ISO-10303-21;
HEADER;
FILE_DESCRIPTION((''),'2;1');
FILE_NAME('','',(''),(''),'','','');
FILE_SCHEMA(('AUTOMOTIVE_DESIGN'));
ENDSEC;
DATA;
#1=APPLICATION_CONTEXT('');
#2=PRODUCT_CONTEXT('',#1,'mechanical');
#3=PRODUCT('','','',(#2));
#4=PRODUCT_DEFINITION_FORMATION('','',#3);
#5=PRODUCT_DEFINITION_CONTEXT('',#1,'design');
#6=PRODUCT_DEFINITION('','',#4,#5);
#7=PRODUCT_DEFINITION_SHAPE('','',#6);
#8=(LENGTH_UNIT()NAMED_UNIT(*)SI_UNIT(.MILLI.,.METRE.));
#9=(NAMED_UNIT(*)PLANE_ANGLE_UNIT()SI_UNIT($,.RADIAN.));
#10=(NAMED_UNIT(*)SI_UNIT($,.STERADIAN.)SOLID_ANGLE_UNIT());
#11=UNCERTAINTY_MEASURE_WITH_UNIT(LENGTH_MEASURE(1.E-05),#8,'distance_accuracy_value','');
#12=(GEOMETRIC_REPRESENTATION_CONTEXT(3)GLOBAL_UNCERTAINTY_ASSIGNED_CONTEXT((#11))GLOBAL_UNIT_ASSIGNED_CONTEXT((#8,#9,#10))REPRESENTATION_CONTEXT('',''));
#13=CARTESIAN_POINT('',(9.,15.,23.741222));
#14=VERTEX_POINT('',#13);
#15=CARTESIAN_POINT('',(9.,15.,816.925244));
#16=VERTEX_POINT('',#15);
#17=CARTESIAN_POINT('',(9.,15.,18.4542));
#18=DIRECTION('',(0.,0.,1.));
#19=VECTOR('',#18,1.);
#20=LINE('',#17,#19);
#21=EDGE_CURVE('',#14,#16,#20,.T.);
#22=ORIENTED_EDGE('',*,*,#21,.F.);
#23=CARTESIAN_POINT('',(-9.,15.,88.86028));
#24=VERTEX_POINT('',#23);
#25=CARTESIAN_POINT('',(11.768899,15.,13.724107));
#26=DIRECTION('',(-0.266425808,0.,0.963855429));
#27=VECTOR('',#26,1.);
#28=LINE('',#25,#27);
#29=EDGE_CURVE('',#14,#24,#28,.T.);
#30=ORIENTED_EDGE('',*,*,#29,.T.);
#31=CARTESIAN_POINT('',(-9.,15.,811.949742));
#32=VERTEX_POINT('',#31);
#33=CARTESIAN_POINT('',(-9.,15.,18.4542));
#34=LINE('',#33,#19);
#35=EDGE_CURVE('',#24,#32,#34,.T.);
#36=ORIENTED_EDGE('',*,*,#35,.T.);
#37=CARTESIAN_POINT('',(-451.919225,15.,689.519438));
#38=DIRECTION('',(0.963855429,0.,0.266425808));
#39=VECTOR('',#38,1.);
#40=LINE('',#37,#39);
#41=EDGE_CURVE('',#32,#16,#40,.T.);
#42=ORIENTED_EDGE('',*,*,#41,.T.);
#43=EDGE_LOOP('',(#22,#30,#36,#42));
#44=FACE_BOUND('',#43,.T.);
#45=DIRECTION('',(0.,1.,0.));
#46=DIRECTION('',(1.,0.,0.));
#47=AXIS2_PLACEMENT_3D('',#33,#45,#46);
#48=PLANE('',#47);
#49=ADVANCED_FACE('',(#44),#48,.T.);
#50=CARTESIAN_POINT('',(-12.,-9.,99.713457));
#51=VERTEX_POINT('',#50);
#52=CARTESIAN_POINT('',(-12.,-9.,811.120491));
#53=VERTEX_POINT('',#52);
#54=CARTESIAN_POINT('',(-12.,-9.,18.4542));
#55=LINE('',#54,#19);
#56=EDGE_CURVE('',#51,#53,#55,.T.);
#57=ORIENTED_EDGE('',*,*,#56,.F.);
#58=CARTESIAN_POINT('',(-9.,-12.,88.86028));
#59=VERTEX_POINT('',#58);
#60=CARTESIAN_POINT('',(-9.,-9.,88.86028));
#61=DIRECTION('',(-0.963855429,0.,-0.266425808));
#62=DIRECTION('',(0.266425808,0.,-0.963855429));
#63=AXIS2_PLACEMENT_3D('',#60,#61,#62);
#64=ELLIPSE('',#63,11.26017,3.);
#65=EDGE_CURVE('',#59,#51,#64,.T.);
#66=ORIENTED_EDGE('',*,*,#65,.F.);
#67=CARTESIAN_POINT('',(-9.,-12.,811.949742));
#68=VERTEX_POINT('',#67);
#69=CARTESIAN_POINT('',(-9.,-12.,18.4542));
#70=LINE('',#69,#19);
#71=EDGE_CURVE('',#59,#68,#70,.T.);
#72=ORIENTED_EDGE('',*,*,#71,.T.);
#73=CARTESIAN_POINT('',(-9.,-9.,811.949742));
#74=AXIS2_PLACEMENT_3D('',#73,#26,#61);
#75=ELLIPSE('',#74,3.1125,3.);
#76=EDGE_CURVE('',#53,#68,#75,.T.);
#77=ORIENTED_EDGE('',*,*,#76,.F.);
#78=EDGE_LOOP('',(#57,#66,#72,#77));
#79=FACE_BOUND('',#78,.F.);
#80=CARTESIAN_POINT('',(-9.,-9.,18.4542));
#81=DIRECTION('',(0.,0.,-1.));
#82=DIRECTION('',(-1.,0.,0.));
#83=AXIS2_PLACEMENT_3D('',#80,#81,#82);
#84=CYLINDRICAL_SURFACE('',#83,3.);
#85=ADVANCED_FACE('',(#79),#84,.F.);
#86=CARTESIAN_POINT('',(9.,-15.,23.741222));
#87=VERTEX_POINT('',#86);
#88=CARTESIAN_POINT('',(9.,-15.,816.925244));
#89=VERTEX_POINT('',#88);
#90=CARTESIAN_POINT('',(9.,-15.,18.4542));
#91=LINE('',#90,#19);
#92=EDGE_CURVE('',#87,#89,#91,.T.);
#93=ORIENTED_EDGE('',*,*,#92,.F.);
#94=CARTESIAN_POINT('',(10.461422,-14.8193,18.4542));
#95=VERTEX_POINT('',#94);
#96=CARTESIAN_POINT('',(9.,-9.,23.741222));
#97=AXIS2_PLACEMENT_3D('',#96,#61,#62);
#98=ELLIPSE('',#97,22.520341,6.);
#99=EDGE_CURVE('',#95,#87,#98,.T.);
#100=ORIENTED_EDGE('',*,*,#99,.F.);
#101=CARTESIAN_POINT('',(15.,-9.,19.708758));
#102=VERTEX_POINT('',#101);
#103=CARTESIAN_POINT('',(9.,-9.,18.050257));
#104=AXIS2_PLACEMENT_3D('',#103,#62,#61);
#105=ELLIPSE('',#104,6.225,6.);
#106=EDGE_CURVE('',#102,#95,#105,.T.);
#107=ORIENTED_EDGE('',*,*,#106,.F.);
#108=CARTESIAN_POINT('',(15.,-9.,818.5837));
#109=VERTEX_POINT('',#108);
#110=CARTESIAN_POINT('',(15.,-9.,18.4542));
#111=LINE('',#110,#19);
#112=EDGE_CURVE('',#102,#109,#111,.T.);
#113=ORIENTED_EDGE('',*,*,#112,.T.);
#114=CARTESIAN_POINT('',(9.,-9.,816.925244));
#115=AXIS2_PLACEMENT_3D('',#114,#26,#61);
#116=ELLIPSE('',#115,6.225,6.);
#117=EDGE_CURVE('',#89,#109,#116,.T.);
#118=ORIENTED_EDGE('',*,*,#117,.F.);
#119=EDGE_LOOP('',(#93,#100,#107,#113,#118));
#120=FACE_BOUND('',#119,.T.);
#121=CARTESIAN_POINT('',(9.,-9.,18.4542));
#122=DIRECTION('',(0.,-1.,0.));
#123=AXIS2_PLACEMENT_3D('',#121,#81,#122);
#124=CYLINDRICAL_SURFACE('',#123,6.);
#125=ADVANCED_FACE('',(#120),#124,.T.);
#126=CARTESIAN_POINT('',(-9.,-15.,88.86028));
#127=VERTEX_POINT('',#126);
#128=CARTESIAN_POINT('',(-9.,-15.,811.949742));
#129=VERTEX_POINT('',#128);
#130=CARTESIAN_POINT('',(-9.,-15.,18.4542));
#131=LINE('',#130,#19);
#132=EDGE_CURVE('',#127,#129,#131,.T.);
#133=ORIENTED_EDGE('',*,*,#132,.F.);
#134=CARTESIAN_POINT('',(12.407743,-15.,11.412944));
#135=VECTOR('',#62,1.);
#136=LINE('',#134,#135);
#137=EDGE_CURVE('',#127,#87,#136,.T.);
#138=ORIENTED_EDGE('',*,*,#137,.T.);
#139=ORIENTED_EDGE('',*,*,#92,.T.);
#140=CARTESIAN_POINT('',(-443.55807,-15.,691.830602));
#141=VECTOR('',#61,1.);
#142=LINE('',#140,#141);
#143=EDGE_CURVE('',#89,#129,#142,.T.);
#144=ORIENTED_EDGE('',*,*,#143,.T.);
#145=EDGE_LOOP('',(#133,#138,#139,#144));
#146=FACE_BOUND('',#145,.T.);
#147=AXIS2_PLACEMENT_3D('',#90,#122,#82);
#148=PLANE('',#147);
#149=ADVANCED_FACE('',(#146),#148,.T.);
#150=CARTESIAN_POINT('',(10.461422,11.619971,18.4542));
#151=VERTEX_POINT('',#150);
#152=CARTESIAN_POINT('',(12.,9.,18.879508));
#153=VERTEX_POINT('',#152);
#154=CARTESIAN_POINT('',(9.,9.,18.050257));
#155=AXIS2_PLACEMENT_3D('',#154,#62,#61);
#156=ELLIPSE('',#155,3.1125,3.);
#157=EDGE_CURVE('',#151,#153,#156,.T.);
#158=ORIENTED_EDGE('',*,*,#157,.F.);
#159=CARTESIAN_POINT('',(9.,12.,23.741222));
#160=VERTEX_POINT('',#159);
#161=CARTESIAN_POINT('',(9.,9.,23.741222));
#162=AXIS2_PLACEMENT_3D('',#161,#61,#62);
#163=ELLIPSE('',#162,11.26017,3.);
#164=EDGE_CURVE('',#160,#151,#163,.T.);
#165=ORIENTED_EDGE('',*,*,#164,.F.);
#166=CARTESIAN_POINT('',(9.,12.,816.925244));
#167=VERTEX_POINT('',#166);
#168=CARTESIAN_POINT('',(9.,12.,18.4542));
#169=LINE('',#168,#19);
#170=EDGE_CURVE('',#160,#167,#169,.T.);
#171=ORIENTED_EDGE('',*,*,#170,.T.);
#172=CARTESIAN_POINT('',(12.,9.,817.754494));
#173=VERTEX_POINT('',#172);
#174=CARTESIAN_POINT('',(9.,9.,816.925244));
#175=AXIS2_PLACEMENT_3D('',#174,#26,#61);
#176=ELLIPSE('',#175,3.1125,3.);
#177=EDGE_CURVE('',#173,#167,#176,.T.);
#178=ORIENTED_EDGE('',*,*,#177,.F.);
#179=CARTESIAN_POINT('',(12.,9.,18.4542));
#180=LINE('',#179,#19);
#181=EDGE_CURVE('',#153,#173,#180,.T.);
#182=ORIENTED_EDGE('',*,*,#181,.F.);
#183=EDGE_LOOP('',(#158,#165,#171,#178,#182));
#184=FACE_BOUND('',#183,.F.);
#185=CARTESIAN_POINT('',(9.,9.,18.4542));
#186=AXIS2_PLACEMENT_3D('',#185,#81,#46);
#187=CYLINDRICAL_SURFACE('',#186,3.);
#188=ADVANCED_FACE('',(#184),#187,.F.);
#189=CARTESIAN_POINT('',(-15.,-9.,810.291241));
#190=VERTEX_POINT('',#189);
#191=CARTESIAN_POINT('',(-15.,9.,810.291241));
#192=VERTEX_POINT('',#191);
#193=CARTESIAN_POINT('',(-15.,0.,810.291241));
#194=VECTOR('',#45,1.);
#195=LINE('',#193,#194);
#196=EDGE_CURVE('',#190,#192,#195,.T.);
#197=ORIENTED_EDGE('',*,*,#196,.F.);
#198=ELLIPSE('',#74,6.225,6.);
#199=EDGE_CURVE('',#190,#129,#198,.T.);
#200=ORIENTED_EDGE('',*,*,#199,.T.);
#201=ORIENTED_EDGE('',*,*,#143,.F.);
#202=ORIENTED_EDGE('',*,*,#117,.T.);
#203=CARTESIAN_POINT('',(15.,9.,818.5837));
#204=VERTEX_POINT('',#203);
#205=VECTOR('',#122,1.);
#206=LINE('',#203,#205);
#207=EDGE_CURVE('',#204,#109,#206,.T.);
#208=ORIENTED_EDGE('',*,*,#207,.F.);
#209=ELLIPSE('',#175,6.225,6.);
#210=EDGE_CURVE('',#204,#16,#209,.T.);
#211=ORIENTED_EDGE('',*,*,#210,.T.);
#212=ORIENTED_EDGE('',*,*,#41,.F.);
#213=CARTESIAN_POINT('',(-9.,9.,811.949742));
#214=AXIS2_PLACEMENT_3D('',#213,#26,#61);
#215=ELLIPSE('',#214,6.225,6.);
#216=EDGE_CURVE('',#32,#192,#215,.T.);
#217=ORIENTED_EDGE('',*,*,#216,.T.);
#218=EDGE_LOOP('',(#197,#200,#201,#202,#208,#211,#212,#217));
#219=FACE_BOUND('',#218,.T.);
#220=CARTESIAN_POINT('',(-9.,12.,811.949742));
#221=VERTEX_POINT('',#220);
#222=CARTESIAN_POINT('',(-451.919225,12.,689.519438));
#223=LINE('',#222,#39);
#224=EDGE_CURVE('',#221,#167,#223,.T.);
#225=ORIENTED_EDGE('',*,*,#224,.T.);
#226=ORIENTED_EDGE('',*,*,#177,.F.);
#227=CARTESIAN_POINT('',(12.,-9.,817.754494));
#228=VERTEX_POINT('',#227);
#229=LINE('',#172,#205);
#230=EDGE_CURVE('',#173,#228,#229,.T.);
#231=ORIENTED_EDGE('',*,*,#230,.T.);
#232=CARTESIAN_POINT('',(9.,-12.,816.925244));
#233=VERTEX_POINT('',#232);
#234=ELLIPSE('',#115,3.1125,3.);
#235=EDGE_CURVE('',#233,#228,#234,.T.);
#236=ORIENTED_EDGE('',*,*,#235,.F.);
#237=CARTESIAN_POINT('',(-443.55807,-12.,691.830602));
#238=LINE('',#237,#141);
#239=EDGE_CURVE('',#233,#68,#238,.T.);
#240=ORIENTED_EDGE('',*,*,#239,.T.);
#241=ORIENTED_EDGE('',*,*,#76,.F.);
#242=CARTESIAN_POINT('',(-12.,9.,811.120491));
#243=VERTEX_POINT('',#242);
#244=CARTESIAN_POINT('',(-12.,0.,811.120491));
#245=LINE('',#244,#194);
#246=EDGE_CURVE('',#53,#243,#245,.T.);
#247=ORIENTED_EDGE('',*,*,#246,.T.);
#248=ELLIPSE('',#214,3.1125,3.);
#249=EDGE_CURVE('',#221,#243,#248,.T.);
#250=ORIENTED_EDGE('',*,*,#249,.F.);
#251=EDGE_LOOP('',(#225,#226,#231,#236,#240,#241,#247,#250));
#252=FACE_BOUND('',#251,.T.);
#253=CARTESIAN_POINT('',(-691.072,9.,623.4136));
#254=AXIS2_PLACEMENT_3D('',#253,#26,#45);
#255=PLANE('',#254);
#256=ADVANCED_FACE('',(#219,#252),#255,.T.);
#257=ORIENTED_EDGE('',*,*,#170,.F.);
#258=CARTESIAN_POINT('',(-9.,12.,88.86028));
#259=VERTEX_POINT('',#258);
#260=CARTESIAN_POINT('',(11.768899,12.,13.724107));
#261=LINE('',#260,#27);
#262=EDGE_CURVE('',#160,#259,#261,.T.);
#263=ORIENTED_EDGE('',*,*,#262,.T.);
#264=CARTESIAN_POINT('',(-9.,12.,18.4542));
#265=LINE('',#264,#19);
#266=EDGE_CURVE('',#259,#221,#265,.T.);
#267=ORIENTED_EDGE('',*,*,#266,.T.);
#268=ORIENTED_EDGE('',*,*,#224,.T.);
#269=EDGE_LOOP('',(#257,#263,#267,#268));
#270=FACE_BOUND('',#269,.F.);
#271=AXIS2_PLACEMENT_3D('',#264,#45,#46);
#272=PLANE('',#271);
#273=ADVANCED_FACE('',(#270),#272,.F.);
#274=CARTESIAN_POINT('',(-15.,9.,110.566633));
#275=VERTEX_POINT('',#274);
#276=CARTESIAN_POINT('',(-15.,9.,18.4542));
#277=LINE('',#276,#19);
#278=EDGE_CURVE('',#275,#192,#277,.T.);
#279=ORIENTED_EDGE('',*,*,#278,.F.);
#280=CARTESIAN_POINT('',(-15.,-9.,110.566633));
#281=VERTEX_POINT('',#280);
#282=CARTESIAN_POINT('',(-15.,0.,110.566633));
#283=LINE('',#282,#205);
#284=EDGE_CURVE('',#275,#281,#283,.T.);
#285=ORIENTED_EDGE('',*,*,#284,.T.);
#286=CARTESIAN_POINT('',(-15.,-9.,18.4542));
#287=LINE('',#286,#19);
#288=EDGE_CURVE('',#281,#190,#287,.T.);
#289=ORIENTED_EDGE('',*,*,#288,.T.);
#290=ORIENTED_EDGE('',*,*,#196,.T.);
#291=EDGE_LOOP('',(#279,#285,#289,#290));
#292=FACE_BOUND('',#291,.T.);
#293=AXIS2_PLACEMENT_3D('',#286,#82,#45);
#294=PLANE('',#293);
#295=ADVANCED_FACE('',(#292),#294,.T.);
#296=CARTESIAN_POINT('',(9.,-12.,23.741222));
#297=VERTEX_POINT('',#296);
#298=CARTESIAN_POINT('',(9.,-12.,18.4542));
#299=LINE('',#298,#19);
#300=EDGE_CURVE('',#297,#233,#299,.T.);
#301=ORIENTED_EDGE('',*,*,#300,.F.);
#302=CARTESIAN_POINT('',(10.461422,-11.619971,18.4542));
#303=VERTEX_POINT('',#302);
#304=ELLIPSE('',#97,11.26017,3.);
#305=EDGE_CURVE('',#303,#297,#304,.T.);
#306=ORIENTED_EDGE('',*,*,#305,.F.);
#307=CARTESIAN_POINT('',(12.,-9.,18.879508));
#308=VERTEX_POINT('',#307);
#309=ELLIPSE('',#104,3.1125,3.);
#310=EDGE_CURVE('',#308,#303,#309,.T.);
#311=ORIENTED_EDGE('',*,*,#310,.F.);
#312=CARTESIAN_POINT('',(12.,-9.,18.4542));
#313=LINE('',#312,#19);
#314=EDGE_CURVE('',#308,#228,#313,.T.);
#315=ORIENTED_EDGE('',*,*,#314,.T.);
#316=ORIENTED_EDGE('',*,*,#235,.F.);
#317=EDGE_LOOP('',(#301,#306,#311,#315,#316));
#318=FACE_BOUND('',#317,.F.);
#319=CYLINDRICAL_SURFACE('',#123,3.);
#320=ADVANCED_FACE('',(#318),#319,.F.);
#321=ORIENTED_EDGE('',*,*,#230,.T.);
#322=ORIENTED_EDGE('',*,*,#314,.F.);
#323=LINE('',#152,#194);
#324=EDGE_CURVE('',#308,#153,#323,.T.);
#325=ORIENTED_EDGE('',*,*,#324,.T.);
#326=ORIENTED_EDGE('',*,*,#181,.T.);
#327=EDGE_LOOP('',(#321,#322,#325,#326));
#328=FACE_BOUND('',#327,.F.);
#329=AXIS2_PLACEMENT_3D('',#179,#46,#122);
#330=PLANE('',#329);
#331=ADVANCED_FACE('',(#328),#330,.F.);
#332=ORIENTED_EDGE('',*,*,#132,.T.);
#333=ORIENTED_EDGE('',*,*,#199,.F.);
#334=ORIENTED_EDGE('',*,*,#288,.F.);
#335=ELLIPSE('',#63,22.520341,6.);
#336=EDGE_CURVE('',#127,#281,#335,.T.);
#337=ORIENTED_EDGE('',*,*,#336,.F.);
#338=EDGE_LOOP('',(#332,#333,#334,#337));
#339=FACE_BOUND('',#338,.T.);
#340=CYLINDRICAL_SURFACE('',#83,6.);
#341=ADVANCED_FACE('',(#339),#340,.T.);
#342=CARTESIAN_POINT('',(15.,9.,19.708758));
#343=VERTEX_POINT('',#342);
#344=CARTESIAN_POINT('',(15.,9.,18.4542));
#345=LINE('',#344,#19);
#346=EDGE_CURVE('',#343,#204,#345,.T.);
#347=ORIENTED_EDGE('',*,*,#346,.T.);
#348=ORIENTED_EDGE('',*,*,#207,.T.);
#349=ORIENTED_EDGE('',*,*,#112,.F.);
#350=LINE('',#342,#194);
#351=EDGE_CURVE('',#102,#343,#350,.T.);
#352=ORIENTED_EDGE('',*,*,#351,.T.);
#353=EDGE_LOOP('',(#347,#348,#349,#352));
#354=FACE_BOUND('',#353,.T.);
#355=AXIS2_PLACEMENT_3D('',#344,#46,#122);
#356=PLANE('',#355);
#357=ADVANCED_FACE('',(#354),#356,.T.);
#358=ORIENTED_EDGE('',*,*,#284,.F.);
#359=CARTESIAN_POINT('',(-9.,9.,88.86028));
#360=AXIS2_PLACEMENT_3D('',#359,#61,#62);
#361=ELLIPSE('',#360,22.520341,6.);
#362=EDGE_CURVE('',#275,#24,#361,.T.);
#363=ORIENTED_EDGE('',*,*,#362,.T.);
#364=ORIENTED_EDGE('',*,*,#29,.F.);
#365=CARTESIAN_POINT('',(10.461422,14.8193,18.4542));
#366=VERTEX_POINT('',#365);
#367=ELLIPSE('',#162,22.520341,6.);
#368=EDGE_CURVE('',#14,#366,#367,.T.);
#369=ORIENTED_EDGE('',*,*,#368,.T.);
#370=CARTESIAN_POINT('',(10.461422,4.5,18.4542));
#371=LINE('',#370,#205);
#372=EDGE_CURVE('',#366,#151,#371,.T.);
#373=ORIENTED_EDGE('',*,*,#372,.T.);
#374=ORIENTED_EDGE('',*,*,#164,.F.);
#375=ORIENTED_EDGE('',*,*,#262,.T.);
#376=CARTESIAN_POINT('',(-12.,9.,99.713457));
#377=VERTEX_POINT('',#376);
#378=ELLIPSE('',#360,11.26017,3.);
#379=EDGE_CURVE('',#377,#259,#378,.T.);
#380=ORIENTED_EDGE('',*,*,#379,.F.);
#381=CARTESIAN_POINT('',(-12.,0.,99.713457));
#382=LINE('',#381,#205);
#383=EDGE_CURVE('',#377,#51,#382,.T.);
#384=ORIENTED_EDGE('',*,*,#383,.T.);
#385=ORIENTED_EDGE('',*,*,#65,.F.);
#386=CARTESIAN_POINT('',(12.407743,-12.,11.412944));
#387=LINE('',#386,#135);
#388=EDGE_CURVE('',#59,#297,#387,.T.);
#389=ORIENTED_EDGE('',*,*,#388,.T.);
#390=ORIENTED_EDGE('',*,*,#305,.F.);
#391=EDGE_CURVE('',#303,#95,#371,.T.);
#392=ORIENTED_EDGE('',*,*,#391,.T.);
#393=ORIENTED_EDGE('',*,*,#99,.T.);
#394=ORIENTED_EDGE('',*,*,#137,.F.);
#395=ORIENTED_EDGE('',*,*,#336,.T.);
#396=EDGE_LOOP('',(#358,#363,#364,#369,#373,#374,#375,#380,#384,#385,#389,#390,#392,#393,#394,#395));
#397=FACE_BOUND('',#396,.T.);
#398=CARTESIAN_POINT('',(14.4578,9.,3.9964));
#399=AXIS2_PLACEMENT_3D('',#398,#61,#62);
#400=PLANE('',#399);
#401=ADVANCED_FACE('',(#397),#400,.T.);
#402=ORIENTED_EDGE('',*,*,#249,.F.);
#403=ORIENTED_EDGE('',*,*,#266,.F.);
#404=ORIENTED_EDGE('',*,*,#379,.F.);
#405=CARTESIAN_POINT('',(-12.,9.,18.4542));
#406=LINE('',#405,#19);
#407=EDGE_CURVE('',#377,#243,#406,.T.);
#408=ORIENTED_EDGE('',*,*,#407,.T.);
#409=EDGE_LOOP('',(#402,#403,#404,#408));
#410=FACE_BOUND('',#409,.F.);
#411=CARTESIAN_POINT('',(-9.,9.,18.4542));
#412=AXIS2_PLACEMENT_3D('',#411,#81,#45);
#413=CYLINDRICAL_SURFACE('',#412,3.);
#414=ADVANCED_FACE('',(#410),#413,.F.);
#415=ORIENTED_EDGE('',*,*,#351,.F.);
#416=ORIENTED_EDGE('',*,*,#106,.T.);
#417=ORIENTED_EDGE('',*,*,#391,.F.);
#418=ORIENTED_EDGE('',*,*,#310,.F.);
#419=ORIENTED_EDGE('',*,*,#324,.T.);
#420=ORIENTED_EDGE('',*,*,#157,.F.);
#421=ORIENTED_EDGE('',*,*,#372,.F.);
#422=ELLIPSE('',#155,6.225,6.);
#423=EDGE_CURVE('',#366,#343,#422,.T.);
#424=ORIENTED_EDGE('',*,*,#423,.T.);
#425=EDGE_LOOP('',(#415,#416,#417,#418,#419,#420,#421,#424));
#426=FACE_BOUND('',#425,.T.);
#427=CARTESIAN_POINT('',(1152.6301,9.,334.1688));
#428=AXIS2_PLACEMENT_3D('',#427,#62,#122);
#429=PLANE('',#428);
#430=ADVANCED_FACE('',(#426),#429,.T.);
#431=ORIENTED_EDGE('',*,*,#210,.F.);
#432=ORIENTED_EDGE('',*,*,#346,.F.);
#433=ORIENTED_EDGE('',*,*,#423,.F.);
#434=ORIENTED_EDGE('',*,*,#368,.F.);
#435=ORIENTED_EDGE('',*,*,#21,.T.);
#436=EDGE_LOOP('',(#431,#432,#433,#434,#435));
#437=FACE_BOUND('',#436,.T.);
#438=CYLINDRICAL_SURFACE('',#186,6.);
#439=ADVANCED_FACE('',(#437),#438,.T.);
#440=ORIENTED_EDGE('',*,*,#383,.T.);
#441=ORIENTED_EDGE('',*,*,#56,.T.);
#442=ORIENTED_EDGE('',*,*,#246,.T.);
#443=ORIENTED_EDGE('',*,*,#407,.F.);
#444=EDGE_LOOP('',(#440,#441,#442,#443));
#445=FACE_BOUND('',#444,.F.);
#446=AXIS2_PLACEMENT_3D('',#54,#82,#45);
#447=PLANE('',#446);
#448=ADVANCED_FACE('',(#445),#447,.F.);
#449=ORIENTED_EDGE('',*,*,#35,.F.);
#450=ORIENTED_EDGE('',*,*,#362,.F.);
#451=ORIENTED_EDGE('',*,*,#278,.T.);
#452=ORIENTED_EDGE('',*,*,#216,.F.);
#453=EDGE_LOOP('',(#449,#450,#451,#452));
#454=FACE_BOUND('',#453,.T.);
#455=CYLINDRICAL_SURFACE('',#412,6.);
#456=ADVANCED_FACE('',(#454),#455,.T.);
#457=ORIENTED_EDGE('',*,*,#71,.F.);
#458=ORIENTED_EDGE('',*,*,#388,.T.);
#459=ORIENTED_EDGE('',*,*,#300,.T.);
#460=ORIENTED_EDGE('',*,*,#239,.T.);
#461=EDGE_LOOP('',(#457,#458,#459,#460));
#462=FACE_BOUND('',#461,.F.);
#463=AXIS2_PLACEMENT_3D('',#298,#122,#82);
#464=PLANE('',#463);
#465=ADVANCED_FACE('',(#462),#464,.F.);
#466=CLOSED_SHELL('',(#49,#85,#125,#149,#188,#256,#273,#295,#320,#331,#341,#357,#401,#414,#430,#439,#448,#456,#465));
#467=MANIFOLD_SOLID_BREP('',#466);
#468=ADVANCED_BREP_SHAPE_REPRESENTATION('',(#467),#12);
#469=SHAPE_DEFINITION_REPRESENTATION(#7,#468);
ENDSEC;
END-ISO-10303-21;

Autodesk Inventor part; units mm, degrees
ref_plane "Start Plane" through (0, 0, 18.4542) normal (0, 0, 1) x (1, 0, 0)
ref_plane "End Plane" through (0, 0, 818.5838) normal (0, 0, 1) x (1, 0, 0)
sketch "Sketch" plane through (0, 0, 0) normal (0, 0, 1) x (1, 0, 0)
  line L0 (-15, -9) -> (-15, 9)
  line L1 (-9, 15) -> (9, 15)
  line L2 (15, 9) -> (15, -9)
  line L3 (9, -15) -> (-9, -15)
  arc A0 (-15, -9) -> (-9, -15) centre (-9, -9) ccw
  arc A1 (-9, 15) -> (-15, 9) centre (-9, 9) ccw
  arc A2 (15, 9) -> (9, 15) centre (9, 9) ccw
  arc A3 (9, -15) -> (15, -9) centre (9, -9) ccw
  arc A4 (-9, 12) -> (-12, 9) centre (-9, 9) ccw
  line L4 (-9, 12) -> (9, 12)
  arc A5 (12, 9) -> (9, 12) centre (9, 9) ccw
  line L5 (12, 9) -> (12, -9)
  arc A6 (9, -12) -> (12, -9) centre (9, -9) ccw
  line L6 (9, -12) -> (-9, -12)
  arc A7 (-12, -9) -> (-9, -12) centre (-9, -9) ccw
  line L7 (-12, -9) -> (-12, 9)
  line L8 (0, 22.7397) -> (0, -22.7397) construction
  line L9 (-22.7397, 0) -> (22.7397, 0) construction
  dimension "d7" = 6
  dimension "d10" = 30
  dimension "d11" = 30
  dimension "d12" = 3
  dimension "d15" = 15
  dimension "d16" = 15
extrude "Body" add sketch "Sketch" along normal up to surface (800.1295 mm away) from surface at 18.4542
sketch "Sketch3" plane through (0, 0, 0) normal (0, 0, 1) x (1, 0, 0)
  line L0 (0, 0) -> (10, 0)
ref_plane "Work Plane3" through (0, 0, 0) normal (0, -1, 0) x (1, 0, 0)
ref_plane "Work Plane4" through (-691.072, 9, 623.4136) normal (-0.2664258, 0, 0.9638554) x (0.9638554, 0, 0.2664258)
split "Split1" plane through (-691.072, 9, 623.4136) removes the side toward (-0.2664258, 0, 0.9638554)
ref_plane "Work Plane5" through (14.4578, 9, 3.9964) normal (-0.9638554, 0, -0.2664258) x (-0.2664258, 0, 0.9638554)
split "Split2" plane through (14.4578, 9, 3.9964) removes the side toward (-0.9638554, 0, -0.2664258)
ref_plane "Work Plane6" through (1152.6301, 9, 334.1688) normal (0.2664258, 0, -0.9638554) x (-0.9638554, 0, -0.2664258)
split "Split3" plane through (1152.6301, 9, 334.1688) removes the side toward (0.2664258, 0, -0.9638554)
sketch "Sketch4" plane through (0, 0, 0) normal (0, -1, 0) x (1, 0, 0)
  line L0 (-2, 18.4542) -> (12, 18.4542) projected
  line L1 (-2, 818.5838) -> (12, 818.5838) projected
  dimension "d18" = 800.1295
equation "\"d7\" = G_IR"
equation "\"d10\" = G_H"
equation "\"d11\" = G_W"
equation "\"d12\" = G_T"
equation "\"d15\" = 0.5 * d10"
equation "\"d16\" = 0.5 * d11"
equation "\"d3\" = G_L"
equation "\"G_W\" = 30"
equation "\"G_H\" = 30"
equation "\"G_T\" = 3"
equation "\"G_IR\" = 6"
equation "\"G_L\" = d18"
equation "\"G_OFFSET_START\" = -18.45422"
equation "\"G_OFFSET_END\" = -11.41625"
equation "\"d13\" = -G_OFFSET_START"
equation "\"d14\" = G_OFFSET_END + B_L"
equation "\"B_L\" = 830"
properties part number "DIN EN 10219-2 - 30 x 30 x 3  - 800.13" material "Steel, Mild"
